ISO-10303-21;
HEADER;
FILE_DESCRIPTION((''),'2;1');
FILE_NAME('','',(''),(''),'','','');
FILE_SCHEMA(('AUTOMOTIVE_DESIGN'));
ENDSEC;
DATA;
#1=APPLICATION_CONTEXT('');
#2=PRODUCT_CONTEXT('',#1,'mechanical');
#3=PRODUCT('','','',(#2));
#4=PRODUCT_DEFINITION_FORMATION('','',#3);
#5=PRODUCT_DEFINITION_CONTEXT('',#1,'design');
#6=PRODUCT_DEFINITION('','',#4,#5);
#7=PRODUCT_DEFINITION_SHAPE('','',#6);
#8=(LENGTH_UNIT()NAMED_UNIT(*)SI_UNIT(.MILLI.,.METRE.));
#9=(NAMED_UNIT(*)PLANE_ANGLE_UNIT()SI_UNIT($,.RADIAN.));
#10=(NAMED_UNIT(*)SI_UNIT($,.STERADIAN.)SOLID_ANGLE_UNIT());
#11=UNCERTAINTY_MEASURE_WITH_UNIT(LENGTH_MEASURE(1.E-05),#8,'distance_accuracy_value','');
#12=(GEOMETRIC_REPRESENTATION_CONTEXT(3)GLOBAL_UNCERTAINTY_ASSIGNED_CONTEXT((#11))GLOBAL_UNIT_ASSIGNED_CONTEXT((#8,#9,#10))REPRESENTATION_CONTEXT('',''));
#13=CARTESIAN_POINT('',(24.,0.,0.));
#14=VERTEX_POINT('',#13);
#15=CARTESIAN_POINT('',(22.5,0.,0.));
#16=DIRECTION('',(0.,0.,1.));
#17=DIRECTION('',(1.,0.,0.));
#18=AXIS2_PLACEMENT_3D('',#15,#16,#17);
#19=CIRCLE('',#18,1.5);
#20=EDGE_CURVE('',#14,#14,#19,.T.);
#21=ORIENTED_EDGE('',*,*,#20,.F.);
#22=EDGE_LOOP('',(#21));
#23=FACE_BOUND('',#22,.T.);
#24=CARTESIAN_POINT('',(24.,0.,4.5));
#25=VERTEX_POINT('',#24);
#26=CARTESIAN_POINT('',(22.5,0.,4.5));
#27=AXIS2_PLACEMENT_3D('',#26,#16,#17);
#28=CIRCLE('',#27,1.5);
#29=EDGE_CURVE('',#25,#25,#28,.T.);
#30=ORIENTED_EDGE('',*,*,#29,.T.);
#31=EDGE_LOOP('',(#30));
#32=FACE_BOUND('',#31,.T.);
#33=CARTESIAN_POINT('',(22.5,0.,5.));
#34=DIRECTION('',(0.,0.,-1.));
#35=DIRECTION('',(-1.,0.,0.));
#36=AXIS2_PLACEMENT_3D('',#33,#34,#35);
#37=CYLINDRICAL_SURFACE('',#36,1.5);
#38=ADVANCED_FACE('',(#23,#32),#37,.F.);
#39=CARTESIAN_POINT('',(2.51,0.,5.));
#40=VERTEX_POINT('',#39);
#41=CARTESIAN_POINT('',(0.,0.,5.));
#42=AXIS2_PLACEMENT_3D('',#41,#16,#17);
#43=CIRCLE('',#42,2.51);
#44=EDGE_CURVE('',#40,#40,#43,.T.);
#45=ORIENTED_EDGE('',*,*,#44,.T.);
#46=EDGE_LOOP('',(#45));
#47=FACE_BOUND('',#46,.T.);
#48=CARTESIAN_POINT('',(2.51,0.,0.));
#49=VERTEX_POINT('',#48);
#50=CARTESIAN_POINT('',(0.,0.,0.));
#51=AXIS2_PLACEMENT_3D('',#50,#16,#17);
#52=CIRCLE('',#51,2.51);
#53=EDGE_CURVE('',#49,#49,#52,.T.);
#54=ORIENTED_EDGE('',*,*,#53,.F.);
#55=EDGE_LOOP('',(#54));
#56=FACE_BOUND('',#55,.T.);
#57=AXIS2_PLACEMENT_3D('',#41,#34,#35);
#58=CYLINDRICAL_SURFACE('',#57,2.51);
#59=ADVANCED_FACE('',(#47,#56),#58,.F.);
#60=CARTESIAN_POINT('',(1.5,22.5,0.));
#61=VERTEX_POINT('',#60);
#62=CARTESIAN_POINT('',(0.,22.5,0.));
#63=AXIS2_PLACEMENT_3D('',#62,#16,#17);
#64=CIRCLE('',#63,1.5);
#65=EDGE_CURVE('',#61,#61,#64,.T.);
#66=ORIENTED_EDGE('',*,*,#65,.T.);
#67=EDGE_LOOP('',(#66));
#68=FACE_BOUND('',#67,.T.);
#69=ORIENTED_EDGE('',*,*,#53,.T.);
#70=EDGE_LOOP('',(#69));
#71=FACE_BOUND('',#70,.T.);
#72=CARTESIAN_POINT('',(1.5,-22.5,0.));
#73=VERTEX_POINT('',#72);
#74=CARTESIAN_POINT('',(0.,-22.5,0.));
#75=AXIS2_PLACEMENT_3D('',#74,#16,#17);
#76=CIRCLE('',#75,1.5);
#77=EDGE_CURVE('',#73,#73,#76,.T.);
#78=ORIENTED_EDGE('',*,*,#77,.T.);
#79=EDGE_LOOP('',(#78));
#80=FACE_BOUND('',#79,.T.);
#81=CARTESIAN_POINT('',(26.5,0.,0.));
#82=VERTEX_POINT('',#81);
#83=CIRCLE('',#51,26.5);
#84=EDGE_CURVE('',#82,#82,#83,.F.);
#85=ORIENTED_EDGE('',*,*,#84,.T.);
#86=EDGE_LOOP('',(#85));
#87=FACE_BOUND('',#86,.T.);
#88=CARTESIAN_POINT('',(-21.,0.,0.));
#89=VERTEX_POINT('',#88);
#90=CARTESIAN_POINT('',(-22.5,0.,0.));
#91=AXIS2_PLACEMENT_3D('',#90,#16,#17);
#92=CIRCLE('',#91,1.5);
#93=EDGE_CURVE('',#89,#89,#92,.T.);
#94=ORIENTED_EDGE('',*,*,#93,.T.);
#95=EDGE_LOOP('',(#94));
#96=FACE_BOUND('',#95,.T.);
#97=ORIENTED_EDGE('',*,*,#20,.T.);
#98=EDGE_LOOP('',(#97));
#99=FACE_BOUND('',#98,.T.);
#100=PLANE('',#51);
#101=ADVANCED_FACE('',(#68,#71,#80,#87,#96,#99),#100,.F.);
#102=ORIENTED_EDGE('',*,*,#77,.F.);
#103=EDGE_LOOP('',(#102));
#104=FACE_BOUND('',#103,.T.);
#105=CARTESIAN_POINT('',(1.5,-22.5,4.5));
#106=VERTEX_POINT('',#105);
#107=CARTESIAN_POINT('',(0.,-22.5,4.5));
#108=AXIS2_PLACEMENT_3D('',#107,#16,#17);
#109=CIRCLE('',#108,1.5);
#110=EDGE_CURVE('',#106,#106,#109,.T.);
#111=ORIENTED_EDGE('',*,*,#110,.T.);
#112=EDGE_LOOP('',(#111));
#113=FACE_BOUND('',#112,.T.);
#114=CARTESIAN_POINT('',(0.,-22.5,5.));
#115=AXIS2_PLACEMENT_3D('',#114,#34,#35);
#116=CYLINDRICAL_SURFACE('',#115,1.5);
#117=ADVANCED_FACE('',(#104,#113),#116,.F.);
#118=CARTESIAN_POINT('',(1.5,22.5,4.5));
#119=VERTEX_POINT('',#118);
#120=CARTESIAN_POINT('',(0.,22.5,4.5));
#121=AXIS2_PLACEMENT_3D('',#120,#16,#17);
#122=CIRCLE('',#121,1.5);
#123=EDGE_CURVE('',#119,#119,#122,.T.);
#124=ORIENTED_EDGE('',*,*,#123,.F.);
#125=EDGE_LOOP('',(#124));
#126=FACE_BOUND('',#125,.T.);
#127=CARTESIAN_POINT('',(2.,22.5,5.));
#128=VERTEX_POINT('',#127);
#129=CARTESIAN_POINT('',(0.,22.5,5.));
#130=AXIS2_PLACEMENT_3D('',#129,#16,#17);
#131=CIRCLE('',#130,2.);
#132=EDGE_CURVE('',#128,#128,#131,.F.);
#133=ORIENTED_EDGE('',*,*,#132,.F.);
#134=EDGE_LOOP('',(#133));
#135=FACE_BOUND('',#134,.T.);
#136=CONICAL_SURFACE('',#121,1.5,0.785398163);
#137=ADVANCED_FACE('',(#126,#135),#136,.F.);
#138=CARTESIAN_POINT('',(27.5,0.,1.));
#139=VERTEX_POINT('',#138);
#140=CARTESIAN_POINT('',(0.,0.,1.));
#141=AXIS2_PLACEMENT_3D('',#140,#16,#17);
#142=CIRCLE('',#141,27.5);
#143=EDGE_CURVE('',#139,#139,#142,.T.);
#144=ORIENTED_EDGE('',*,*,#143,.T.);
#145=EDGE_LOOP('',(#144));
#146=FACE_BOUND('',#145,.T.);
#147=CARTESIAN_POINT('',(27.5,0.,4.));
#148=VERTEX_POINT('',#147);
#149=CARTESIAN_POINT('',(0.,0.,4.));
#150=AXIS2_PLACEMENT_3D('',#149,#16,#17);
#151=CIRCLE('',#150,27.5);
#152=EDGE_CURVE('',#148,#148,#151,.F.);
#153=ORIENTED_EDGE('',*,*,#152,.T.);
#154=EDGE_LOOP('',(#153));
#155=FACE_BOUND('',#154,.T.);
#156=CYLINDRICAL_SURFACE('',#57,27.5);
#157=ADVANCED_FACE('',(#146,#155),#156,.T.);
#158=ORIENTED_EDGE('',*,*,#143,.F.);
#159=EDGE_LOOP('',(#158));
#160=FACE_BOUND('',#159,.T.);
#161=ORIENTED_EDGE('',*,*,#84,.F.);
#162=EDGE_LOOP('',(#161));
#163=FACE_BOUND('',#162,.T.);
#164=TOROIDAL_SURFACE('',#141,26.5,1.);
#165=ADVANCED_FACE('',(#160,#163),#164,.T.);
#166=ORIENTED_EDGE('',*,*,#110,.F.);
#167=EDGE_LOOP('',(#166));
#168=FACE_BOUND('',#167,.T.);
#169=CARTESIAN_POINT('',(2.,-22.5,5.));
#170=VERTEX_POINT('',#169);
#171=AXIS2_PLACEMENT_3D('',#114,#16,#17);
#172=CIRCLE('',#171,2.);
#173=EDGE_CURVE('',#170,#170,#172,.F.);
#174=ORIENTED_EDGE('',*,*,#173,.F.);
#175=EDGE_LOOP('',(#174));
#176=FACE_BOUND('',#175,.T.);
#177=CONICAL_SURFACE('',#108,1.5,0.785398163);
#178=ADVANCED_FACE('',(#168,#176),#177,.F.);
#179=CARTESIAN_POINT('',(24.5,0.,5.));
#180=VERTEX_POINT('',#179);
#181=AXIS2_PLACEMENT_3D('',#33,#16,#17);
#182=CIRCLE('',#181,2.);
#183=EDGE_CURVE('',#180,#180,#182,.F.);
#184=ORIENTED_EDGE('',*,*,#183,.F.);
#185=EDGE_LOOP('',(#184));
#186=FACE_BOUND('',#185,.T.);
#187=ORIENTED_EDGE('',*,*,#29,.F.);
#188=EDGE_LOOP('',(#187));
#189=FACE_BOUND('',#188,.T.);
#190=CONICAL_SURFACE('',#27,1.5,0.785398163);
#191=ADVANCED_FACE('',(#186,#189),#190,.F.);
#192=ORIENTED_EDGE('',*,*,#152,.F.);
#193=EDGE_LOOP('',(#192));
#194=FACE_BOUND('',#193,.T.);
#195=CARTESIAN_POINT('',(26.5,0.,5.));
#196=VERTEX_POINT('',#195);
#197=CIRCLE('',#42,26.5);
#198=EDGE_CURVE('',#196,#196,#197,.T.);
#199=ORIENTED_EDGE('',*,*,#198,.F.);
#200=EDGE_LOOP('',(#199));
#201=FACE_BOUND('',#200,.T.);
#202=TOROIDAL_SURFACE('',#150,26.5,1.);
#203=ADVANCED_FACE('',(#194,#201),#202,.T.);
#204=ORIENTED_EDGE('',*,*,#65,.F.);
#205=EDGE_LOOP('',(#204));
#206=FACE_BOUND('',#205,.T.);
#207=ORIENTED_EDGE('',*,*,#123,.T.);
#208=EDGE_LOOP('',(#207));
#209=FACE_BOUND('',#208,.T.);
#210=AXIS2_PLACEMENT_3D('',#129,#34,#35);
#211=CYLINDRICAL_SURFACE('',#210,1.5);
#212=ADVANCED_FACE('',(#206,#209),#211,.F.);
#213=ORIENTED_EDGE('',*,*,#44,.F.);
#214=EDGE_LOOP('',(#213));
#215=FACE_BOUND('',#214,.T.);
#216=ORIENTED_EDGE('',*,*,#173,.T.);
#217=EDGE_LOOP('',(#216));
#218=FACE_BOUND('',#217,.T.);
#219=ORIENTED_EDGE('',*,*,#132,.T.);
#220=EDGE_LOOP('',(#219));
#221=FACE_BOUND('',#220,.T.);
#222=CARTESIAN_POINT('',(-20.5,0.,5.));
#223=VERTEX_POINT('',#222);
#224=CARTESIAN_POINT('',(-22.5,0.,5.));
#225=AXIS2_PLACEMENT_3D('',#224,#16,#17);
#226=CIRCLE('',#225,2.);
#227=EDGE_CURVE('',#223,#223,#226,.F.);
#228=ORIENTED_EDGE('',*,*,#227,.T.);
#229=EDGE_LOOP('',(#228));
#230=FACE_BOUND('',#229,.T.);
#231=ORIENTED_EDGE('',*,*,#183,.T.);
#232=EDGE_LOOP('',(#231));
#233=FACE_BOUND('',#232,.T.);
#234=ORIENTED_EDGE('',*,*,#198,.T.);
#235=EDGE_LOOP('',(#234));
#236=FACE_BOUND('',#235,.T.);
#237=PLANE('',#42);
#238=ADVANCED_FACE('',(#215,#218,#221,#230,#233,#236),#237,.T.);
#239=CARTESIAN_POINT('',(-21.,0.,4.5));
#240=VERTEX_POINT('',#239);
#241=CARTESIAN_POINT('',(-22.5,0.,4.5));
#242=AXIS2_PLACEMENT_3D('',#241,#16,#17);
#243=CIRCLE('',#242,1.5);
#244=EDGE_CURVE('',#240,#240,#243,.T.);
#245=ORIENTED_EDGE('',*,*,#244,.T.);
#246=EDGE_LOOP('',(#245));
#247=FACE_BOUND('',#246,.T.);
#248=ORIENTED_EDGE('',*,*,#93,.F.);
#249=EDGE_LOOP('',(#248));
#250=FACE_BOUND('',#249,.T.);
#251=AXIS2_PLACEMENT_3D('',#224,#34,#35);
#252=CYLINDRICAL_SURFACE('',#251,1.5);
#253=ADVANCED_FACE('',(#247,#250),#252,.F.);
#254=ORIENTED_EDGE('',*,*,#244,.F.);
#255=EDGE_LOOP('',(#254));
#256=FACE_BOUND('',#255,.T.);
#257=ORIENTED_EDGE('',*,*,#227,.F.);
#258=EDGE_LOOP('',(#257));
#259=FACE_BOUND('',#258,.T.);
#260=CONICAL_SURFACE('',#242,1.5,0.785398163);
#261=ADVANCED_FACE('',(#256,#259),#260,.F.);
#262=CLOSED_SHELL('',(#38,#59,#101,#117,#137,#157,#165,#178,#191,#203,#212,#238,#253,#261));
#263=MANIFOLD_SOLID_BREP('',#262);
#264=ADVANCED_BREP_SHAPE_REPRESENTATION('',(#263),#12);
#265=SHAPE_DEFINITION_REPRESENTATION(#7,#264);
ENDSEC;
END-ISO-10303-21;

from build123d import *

# Parameters (mm, degrees)
ESQUISSE1_R        = 27.5
ESQUISSE1_R_2      = 1.5
ESQUISSE1_R_3      = 2.51
BOSS_EXTRU_2_DEPTH = 5
CONG_1_R           = 1
CHANFREIN1_SIZE    = 0.5


with BuildPart() as part:
    # Esquisse1 → Boss.-Extru.2 (new body)
    with BuildSketch(Plane.XY):
        Circle(ESQUISSE1_R)
        with Locations((0, -22.5)):
            Circle(ESQUISSE1_R_2, mode=Mode.SUBTRACT)
        with Locations((22.5, 0)):
            Circle(ESQUISSE1_R_2, mode=Mode.SUBTRACT)
        with Locations((0, 22.5)):
            Circle(ESQUISSE1_R_2, mode=Mode.SUBTRACT)
        with Locations((-22.5, 0)):
            Circle(ESQUISSE1_R_2, mode=Mode.SUBTRACT)
        Circle(ESQUISSE1_R_3, mode=Mode.SUBTRACT)
    extrude(amount=BOSS_EXTRU_2_DEPTH)

    # Congé1
    cong_1_edges = [part.edges().sort_by_distance(p)[0] for p in [
        (-27.5, 0, 5),
        (-27.5, 0, 0),
    ]]
    fillet(cong_1_edges, radius=CONG_1_R)

    # Chanfrein1
    chanfrein1_edges = [part.edges().sort_by_distance(p)[0] for p in [
        (21, 0, 5),
        (-1.5, -22.5, 5),
        (-24, 0, 5),
        (-1.5, 22.5, 5),
    ]]
    chamfer(chanfrein1_edges, length=CHANFREIN1_SIZE)


solid = part.part
